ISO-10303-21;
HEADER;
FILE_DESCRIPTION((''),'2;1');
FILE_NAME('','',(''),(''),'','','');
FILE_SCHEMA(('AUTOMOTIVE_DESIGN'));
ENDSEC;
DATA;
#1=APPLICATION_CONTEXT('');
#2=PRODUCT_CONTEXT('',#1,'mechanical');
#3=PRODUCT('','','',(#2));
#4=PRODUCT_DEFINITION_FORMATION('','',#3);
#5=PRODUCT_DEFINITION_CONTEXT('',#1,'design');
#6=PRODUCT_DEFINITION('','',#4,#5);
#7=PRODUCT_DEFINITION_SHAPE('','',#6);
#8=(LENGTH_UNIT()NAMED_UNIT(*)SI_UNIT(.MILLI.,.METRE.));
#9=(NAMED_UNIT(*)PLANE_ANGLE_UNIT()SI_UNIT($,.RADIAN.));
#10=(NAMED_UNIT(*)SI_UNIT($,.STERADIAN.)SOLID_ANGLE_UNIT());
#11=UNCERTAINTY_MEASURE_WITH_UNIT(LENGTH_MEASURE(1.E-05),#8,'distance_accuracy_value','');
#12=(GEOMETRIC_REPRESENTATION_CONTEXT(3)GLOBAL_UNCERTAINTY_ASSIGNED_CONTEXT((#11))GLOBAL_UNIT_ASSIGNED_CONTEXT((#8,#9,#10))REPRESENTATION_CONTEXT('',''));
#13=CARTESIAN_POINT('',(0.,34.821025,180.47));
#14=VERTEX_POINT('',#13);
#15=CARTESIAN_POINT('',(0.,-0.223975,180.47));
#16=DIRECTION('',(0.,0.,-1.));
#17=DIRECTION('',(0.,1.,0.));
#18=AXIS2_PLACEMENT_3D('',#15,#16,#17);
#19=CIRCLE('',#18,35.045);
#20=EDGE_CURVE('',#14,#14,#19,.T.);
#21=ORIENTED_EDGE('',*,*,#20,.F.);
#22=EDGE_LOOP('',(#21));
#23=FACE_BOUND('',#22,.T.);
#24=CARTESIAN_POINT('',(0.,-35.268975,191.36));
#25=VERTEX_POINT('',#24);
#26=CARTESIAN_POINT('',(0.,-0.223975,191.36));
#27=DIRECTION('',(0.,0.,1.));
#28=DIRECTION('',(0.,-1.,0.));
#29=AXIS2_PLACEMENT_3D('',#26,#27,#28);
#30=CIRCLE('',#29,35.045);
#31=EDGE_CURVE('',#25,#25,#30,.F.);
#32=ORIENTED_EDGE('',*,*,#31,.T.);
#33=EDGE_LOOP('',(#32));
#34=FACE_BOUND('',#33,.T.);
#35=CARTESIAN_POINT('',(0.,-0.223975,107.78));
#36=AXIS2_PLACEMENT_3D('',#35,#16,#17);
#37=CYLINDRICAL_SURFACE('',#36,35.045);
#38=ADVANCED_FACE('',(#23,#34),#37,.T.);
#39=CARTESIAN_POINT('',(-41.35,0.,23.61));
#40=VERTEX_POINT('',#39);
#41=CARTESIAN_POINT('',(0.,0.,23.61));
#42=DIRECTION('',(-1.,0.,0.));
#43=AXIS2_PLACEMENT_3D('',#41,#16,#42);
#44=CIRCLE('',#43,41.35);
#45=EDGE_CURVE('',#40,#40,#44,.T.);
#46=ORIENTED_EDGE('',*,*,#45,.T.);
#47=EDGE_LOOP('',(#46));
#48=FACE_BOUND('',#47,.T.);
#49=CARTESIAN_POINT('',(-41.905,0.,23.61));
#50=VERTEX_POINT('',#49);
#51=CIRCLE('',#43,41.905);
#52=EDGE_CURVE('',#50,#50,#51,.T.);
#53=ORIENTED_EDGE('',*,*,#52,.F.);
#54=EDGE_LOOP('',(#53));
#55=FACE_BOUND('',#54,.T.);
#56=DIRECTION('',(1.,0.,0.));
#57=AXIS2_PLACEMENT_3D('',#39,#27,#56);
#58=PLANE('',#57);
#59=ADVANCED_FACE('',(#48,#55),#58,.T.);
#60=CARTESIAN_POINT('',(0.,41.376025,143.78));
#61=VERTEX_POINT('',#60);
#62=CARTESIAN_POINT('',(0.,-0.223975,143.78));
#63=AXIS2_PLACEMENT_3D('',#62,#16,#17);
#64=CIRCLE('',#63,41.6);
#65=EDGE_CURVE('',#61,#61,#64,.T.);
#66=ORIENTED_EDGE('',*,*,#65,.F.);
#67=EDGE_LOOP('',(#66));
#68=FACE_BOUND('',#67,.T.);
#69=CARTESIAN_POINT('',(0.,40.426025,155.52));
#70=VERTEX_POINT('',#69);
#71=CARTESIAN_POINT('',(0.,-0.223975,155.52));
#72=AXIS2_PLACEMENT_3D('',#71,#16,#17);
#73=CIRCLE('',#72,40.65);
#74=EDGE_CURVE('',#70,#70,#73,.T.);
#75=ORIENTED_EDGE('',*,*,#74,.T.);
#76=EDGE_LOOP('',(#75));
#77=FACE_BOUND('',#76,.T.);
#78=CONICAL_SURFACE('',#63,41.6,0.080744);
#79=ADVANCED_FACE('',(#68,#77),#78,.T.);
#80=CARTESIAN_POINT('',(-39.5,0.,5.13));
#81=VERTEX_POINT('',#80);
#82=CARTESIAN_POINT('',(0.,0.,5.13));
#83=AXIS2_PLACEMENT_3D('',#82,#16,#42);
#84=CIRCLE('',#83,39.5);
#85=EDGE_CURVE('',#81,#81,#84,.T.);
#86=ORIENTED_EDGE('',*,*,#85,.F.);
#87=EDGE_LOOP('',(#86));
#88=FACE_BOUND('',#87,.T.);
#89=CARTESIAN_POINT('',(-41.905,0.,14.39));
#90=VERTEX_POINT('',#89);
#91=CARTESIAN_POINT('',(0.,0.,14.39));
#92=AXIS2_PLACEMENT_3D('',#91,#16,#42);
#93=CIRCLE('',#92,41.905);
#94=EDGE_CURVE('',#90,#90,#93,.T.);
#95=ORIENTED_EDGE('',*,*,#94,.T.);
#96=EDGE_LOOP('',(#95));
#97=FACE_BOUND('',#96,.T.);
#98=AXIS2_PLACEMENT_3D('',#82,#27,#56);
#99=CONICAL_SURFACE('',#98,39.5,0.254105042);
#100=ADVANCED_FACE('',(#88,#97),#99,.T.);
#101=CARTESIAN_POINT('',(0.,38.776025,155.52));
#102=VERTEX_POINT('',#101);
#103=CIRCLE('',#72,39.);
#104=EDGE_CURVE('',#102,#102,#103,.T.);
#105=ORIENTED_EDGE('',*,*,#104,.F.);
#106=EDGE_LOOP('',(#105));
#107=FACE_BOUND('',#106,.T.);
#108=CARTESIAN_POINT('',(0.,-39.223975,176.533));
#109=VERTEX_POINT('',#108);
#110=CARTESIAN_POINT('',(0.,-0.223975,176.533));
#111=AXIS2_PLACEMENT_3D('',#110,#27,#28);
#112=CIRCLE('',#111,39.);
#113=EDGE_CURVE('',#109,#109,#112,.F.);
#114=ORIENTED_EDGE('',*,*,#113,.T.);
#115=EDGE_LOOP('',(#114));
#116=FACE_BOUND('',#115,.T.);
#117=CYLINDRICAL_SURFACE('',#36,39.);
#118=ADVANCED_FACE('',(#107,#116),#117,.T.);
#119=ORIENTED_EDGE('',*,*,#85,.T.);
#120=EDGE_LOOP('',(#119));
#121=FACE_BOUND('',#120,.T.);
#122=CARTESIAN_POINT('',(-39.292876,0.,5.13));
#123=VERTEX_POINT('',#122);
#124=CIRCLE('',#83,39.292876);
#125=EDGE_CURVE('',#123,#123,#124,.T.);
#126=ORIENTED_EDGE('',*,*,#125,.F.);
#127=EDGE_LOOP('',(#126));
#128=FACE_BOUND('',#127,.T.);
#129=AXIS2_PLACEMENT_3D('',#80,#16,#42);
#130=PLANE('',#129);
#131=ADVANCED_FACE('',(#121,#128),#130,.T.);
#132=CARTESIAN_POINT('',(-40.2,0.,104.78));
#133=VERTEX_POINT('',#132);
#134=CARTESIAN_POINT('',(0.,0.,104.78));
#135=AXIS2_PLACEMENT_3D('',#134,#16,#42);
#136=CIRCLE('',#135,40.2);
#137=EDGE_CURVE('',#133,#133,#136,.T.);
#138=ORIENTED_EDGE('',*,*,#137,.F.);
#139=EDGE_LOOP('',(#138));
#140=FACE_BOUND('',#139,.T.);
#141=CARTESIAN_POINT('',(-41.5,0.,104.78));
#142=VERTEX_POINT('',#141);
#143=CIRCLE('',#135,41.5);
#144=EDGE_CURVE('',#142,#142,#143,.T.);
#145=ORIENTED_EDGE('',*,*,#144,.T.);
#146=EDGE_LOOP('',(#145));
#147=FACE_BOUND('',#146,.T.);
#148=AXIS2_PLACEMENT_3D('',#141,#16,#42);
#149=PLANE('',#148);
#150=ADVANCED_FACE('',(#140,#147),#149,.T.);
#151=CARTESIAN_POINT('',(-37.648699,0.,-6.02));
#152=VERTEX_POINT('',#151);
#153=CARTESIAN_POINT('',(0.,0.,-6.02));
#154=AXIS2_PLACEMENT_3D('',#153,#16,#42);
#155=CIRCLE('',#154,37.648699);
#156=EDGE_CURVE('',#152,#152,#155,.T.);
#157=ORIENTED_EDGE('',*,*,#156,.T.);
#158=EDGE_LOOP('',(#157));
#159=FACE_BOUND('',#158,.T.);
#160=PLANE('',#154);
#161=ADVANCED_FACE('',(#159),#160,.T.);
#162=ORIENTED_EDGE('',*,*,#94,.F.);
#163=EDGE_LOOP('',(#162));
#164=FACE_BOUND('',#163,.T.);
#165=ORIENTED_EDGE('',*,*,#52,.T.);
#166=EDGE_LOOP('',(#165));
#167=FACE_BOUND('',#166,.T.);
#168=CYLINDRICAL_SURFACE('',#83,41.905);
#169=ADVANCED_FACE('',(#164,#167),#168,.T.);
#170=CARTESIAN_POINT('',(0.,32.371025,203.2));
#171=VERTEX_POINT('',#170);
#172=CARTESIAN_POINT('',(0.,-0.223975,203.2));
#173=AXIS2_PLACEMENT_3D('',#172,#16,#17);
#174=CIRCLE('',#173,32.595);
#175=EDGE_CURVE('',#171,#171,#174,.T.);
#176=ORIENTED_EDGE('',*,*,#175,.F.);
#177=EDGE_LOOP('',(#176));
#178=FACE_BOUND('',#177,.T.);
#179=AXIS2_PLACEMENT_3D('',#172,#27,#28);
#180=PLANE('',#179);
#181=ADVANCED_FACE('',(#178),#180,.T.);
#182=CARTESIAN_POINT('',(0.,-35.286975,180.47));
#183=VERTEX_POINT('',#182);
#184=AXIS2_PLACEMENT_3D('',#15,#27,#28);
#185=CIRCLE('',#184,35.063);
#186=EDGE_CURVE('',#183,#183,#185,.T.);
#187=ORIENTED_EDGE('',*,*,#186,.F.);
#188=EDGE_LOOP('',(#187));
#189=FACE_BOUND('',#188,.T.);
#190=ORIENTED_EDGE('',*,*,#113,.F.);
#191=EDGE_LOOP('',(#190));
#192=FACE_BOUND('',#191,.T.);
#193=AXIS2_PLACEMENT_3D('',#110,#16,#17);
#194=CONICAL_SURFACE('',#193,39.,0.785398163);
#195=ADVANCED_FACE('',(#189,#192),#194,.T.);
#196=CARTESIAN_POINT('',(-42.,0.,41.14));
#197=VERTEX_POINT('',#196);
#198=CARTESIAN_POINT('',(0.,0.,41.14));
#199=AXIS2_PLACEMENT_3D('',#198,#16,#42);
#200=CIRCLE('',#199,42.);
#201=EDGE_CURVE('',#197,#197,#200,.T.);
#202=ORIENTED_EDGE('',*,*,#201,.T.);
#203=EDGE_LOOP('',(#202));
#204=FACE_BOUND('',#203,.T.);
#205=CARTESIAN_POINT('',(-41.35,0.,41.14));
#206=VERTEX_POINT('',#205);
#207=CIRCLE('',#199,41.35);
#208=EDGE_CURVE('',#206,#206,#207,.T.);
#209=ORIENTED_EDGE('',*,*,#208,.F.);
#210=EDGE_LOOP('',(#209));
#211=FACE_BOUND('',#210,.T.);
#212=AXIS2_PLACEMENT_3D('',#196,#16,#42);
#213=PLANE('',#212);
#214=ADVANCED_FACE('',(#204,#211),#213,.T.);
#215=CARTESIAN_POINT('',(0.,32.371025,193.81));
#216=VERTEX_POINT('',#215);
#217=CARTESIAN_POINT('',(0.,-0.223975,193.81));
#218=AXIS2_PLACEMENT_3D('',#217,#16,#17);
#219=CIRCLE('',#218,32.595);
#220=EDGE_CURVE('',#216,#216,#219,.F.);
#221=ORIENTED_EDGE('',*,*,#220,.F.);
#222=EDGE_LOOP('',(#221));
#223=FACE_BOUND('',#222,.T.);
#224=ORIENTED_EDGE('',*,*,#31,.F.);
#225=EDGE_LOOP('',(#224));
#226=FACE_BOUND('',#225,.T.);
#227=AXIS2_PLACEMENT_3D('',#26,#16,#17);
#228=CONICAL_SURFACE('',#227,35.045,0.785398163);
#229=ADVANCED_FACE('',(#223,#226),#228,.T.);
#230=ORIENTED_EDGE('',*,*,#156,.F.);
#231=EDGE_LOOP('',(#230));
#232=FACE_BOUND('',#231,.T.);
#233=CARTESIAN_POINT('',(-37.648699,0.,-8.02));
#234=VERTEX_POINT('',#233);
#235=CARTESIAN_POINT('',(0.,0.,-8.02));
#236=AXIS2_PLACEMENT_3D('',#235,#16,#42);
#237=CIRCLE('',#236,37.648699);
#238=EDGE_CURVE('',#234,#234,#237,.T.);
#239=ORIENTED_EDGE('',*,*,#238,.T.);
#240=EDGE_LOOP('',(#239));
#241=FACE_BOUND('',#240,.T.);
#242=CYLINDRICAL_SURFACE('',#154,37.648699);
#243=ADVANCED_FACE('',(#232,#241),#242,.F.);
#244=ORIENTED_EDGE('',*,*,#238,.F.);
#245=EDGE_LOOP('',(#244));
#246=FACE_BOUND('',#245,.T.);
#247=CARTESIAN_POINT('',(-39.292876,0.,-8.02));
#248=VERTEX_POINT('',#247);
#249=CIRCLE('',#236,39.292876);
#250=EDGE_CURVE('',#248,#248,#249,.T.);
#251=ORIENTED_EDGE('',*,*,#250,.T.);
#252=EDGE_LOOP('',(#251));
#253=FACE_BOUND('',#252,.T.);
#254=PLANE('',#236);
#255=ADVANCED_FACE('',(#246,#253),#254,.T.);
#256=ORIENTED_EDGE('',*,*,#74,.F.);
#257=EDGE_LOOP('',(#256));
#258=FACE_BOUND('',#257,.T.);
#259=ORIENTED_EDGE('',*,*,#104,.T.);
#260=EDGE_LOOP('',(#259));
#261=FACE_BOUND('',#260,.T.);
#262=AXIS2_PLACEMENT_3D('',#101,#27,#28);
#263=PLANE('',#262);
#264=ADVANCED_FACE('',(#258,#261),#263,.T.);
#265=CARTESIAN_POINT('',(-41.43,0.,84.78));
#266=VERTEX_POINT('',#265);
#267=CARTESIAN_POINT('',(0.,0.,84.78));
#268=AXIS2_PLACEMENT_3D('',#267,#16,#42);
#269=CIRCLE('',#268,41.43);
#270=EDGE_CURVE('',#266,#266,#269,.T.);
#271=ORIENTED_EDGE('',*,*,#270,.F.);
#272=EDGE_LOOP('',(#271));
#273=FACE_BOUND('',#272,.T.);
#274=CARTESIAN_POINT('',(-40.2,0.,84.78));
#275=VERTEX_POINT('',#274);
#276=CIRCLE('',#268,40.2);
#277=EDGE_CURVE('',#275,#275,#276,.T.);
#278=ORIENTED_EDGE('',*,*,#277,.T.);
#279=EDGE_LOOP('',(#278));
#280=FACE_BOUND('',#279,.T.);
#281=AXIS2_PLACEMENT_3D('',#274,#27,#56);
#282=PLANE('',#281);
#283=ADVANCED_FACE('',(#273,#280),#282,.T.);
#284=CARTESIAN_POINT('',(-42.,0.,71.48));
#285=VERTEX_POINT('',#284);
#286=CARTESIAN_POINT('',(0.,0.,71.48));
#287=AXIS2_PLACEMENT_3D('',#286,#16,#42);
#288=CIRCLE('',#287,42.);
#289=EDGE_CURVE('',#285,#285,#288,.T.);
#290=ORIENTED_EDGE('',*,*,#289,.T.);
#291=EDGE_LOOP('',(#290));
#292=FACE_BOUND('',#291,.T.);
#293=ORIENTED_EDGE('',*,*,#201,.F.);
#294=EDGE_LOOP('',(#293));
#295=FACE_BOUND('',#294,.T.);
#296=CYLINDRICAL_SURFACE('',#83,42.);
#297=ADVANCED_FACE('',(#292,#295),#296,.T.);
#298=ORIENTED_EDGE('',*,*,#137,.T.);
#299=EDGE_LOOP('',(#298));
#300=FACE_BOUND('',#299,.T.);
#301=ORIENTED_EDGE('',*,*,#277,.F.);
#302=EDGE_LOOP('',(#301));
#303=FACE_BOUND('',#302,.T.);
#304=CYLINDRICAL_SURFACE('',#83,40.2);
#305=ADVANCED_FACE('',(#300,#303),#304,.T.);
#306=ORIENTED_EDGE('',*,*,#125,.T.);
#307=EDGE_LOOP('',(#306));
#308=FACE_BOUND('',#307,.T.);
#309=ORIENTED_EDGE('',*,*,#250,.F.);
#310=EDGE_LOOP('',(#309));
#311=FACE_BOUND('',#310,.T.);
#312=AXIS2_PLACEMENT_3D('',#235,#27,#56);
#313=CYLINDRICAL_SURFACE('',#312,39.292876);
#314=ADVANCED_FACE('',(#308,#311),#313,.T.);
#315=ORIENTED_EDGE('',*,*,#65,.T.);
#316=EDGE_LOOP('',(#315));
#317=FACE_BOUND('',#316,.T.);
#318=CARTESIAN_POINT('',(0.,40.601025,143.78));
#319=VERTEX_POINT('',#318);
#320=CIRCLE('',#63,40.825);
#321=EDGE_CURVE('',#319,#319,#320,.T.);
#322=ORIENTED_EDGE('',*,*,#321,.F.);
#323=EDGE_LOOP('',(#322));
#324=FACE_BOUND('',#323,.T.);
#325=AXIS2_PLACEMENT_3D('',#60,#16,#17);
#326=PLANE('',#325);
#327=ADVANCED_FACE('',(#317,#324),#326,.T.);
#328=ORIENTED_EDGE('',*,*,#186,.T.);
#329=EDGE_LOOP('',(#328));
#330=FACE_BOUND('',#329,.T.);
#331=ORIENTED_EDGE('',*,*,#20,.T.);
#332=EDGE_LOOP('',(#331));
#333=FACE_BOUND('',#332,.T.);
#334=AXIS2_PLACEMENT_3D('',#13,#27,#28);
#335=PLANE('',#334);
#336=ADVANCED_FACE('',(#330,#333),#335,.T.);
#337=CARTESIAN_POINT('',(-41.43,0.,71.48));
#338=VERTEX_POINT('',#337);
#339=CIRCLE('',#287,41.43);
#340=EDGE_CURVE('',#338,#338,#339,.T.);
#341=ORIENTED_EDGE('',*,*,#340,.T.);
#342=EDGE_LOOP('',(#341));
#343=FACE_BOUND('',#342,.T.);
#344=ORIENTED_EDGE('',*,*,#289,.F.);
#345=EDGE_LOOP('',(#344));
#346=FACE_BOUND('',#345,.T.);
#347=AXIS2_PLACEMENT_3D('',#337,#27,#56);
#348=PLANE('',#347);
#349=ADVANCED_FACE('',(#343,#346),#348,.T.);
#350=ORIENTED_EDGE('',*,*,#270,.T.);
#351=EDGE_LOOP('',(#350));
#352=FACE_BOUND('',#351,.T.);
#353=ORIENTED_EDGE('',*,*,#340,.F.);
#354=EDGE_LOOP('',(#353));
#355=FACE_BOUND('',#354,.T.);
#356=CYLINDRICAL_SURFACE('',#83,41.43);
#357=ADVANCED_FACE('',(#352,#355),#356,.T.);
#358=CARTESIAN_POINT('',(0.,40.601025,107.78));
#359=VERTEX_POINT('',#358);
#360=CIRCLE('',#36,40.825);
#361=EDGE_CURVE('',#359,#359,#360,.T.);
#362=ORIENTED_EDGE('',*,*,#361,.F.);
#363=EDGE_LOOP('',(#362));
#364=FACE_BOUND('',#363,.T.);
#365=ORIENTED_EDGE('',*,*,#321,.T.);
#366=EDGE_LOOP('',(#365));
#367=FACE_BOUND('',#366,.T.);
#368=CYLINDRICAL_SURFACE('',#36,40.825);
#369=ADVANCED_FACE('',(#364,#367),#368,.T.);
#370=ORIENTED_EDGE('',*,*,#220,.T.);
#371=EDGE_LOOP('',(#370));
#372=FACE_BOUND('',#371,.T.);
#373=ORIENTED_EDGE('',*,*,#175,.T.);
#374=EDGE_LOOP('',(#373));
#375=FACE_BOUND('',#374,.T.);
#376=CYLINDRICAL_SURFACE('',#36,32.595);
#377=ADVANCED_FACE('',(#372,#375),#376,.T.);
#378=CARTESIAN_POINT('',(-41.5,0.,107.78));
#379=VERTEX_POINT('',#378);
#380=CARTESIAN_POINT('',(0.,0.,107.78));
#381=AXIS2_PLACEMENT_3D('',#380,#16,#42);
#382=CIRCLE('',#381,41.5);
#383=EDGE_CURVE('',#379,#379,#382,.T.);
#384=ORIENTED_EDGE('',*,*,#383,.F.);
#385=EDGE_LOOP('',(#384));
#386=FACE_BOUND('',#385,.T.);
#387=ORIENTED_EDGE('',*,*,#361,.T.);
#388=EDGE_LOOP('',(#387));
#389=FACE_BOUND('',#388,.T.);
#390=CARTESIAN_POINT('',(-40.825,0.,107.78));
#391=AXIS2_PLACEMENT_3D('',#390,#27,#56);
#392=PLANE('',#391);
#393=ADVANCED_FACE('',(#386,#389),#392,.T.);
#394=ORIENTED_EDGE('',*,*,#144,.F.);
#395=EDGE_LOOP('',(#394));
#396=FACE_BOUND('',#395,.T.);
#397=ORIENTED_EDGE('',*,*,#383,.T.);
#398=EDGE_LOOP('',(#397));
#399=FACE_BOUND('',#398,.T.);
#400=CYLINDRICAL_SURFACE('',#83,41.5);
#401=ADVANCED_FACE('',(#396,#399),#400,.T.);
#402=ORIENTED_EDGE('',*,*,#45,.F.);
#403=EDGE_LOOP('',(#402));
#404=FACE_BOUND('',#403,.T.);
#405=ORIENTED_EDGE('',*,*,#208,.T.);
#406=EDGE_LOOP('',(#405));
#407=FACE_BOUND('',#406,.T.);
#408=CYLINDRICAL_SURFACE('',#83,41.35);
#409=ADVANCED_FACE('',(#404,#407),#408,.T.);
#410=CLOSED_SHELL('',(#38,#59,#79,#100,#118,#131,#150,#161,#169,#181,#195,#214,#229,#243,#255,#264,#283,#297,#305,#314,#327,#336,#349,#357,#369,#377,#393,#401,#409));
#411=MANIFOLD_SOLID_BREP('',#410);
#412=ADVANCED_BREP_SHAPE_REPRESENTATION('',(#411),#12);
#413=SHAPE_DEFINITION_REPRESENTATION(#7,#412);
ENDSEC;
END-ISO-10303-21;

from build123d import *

# Parameters (mm, degrees)
CHAMFER1_SIZE       = 3.937
CHAMFER2_SIZE       = 2.54
SKETCH3_R           = 39.292876354
BOSS_EXTRUDE1_DEPTH = 13.15
SKETCH4_R           = 37.648699114
CUT_EXTRUDE1_DEPTH  = 2


with BuildPart() as part:
    # Sketch1 → Revolve1 (revolve)
    with BuildSketch(Plane(origin=(0, 0, 0), x_dir=(0, 0, -1), z_dir=(1, 0, 0))):
        Polygon((-107.78, -0.223974787), (-203.2, -0.223974787), (-203.2, 32.371025213), (-193.9, 32.371025213), (-193.9, 34.821025213), (-180.47, 34.821025213), (-180.47, 38.776025213), (-155.52, 38.776025213), (-155.52, 40.426025213), (-143.78, 41.376025213), (-143.78, 40.601025213), (-107.78, 40.601025213), align=None)
    revolve(axis=Axis((0, -0.223974787, 107.78), (0, 0, 1)))

    # Chamfer1
    chamfer1_edges = [part.edges().sort_by_distance(p)[0] for p in [
        (0, -39.223974787, 180.47),
    ]]
    chamfer(chamfer1_edges, length=CHAMFER1_SIZE)

    # Chamfer2
    # the kernel refuses this chamfer: 2.54 mm, written as the material it takes off along each edge
    with BuildSketch(Plane(origin=(0, -0.223974787, 193.9), x_dir=(0, 1, 0), z_dir=(1, 0, 0))) as chamfer2_piece_1_section:
        Polygon((35.045, -CHAMFER2_SIZE), (35.045 - CHAMFER2_SIZE, 0), (35.045, 0), align=None)
    chamfer2_piece_1 = revolve(axis=Axis((0, -0.223974787, 193.9), (0, 0, 1)), mode=Mode.PRIVATE)
    chamfer2_piece_1 = chamfer2_piece_1 - Plane(origin=(0, -0.223974787, 192.613574864), x_dir=(0, 1, 0), z_dir=(0, 0, -1)) * Cylinder(32.595, 141, mode=Mode.PRIVATE)
    add(chamfer2_piece_1, mode=Mode.SUBTRACT)

    # Sketch2 → Revolve2 (revolve)
    with BuildSketch(Plane(origin=(0, 0, 0), x_dir=(1, 0, 0), z_dir=(0, 1, 0))):
        Polygon((-40.825, -107.78), (-41.5, -107.78), (-41.5, -104.78), (-40.2, -104.78), (-40.2, -84.78), (-41.43, -84.78), (-41.43, -71.48), (-42, -71.48), (-42, -41.14), (-41.35, -41.14), (-41.35, -23.61), (-41.905, -23.61), (-41.905, -14.39), (-39.5, -5.13), (0, -5.13), (0, -107.78), align=None)
    revolve(axis=Axis((0, 0, 5.13), (0, 0, 1)))

    # Sketch3 → Boss-Extrude1 (add)
    with BuildSketch(Plane(origin=(0, 0, 5.13), x_dir=(-1, 0, 0), z_dir=(0, 0, -1))):
        Circle(SKETCH3_R)
    extrude(amount=BOSS_EXTRUDE1_DEPTH)

    # Sketch4 → Cut-Extrude1 (cut)
    with BuildSketch(Plane(origin=(0, 0, -8.02), x_dir=(-1, 0, 0), z_dir=(0, 0, -1))):
        Circle(SKETCH4_R)
    extrude(amount=-CUT_EXTRUDE1_DEPTH, mode=Mode.SUBTRACT)


solid = part.part
